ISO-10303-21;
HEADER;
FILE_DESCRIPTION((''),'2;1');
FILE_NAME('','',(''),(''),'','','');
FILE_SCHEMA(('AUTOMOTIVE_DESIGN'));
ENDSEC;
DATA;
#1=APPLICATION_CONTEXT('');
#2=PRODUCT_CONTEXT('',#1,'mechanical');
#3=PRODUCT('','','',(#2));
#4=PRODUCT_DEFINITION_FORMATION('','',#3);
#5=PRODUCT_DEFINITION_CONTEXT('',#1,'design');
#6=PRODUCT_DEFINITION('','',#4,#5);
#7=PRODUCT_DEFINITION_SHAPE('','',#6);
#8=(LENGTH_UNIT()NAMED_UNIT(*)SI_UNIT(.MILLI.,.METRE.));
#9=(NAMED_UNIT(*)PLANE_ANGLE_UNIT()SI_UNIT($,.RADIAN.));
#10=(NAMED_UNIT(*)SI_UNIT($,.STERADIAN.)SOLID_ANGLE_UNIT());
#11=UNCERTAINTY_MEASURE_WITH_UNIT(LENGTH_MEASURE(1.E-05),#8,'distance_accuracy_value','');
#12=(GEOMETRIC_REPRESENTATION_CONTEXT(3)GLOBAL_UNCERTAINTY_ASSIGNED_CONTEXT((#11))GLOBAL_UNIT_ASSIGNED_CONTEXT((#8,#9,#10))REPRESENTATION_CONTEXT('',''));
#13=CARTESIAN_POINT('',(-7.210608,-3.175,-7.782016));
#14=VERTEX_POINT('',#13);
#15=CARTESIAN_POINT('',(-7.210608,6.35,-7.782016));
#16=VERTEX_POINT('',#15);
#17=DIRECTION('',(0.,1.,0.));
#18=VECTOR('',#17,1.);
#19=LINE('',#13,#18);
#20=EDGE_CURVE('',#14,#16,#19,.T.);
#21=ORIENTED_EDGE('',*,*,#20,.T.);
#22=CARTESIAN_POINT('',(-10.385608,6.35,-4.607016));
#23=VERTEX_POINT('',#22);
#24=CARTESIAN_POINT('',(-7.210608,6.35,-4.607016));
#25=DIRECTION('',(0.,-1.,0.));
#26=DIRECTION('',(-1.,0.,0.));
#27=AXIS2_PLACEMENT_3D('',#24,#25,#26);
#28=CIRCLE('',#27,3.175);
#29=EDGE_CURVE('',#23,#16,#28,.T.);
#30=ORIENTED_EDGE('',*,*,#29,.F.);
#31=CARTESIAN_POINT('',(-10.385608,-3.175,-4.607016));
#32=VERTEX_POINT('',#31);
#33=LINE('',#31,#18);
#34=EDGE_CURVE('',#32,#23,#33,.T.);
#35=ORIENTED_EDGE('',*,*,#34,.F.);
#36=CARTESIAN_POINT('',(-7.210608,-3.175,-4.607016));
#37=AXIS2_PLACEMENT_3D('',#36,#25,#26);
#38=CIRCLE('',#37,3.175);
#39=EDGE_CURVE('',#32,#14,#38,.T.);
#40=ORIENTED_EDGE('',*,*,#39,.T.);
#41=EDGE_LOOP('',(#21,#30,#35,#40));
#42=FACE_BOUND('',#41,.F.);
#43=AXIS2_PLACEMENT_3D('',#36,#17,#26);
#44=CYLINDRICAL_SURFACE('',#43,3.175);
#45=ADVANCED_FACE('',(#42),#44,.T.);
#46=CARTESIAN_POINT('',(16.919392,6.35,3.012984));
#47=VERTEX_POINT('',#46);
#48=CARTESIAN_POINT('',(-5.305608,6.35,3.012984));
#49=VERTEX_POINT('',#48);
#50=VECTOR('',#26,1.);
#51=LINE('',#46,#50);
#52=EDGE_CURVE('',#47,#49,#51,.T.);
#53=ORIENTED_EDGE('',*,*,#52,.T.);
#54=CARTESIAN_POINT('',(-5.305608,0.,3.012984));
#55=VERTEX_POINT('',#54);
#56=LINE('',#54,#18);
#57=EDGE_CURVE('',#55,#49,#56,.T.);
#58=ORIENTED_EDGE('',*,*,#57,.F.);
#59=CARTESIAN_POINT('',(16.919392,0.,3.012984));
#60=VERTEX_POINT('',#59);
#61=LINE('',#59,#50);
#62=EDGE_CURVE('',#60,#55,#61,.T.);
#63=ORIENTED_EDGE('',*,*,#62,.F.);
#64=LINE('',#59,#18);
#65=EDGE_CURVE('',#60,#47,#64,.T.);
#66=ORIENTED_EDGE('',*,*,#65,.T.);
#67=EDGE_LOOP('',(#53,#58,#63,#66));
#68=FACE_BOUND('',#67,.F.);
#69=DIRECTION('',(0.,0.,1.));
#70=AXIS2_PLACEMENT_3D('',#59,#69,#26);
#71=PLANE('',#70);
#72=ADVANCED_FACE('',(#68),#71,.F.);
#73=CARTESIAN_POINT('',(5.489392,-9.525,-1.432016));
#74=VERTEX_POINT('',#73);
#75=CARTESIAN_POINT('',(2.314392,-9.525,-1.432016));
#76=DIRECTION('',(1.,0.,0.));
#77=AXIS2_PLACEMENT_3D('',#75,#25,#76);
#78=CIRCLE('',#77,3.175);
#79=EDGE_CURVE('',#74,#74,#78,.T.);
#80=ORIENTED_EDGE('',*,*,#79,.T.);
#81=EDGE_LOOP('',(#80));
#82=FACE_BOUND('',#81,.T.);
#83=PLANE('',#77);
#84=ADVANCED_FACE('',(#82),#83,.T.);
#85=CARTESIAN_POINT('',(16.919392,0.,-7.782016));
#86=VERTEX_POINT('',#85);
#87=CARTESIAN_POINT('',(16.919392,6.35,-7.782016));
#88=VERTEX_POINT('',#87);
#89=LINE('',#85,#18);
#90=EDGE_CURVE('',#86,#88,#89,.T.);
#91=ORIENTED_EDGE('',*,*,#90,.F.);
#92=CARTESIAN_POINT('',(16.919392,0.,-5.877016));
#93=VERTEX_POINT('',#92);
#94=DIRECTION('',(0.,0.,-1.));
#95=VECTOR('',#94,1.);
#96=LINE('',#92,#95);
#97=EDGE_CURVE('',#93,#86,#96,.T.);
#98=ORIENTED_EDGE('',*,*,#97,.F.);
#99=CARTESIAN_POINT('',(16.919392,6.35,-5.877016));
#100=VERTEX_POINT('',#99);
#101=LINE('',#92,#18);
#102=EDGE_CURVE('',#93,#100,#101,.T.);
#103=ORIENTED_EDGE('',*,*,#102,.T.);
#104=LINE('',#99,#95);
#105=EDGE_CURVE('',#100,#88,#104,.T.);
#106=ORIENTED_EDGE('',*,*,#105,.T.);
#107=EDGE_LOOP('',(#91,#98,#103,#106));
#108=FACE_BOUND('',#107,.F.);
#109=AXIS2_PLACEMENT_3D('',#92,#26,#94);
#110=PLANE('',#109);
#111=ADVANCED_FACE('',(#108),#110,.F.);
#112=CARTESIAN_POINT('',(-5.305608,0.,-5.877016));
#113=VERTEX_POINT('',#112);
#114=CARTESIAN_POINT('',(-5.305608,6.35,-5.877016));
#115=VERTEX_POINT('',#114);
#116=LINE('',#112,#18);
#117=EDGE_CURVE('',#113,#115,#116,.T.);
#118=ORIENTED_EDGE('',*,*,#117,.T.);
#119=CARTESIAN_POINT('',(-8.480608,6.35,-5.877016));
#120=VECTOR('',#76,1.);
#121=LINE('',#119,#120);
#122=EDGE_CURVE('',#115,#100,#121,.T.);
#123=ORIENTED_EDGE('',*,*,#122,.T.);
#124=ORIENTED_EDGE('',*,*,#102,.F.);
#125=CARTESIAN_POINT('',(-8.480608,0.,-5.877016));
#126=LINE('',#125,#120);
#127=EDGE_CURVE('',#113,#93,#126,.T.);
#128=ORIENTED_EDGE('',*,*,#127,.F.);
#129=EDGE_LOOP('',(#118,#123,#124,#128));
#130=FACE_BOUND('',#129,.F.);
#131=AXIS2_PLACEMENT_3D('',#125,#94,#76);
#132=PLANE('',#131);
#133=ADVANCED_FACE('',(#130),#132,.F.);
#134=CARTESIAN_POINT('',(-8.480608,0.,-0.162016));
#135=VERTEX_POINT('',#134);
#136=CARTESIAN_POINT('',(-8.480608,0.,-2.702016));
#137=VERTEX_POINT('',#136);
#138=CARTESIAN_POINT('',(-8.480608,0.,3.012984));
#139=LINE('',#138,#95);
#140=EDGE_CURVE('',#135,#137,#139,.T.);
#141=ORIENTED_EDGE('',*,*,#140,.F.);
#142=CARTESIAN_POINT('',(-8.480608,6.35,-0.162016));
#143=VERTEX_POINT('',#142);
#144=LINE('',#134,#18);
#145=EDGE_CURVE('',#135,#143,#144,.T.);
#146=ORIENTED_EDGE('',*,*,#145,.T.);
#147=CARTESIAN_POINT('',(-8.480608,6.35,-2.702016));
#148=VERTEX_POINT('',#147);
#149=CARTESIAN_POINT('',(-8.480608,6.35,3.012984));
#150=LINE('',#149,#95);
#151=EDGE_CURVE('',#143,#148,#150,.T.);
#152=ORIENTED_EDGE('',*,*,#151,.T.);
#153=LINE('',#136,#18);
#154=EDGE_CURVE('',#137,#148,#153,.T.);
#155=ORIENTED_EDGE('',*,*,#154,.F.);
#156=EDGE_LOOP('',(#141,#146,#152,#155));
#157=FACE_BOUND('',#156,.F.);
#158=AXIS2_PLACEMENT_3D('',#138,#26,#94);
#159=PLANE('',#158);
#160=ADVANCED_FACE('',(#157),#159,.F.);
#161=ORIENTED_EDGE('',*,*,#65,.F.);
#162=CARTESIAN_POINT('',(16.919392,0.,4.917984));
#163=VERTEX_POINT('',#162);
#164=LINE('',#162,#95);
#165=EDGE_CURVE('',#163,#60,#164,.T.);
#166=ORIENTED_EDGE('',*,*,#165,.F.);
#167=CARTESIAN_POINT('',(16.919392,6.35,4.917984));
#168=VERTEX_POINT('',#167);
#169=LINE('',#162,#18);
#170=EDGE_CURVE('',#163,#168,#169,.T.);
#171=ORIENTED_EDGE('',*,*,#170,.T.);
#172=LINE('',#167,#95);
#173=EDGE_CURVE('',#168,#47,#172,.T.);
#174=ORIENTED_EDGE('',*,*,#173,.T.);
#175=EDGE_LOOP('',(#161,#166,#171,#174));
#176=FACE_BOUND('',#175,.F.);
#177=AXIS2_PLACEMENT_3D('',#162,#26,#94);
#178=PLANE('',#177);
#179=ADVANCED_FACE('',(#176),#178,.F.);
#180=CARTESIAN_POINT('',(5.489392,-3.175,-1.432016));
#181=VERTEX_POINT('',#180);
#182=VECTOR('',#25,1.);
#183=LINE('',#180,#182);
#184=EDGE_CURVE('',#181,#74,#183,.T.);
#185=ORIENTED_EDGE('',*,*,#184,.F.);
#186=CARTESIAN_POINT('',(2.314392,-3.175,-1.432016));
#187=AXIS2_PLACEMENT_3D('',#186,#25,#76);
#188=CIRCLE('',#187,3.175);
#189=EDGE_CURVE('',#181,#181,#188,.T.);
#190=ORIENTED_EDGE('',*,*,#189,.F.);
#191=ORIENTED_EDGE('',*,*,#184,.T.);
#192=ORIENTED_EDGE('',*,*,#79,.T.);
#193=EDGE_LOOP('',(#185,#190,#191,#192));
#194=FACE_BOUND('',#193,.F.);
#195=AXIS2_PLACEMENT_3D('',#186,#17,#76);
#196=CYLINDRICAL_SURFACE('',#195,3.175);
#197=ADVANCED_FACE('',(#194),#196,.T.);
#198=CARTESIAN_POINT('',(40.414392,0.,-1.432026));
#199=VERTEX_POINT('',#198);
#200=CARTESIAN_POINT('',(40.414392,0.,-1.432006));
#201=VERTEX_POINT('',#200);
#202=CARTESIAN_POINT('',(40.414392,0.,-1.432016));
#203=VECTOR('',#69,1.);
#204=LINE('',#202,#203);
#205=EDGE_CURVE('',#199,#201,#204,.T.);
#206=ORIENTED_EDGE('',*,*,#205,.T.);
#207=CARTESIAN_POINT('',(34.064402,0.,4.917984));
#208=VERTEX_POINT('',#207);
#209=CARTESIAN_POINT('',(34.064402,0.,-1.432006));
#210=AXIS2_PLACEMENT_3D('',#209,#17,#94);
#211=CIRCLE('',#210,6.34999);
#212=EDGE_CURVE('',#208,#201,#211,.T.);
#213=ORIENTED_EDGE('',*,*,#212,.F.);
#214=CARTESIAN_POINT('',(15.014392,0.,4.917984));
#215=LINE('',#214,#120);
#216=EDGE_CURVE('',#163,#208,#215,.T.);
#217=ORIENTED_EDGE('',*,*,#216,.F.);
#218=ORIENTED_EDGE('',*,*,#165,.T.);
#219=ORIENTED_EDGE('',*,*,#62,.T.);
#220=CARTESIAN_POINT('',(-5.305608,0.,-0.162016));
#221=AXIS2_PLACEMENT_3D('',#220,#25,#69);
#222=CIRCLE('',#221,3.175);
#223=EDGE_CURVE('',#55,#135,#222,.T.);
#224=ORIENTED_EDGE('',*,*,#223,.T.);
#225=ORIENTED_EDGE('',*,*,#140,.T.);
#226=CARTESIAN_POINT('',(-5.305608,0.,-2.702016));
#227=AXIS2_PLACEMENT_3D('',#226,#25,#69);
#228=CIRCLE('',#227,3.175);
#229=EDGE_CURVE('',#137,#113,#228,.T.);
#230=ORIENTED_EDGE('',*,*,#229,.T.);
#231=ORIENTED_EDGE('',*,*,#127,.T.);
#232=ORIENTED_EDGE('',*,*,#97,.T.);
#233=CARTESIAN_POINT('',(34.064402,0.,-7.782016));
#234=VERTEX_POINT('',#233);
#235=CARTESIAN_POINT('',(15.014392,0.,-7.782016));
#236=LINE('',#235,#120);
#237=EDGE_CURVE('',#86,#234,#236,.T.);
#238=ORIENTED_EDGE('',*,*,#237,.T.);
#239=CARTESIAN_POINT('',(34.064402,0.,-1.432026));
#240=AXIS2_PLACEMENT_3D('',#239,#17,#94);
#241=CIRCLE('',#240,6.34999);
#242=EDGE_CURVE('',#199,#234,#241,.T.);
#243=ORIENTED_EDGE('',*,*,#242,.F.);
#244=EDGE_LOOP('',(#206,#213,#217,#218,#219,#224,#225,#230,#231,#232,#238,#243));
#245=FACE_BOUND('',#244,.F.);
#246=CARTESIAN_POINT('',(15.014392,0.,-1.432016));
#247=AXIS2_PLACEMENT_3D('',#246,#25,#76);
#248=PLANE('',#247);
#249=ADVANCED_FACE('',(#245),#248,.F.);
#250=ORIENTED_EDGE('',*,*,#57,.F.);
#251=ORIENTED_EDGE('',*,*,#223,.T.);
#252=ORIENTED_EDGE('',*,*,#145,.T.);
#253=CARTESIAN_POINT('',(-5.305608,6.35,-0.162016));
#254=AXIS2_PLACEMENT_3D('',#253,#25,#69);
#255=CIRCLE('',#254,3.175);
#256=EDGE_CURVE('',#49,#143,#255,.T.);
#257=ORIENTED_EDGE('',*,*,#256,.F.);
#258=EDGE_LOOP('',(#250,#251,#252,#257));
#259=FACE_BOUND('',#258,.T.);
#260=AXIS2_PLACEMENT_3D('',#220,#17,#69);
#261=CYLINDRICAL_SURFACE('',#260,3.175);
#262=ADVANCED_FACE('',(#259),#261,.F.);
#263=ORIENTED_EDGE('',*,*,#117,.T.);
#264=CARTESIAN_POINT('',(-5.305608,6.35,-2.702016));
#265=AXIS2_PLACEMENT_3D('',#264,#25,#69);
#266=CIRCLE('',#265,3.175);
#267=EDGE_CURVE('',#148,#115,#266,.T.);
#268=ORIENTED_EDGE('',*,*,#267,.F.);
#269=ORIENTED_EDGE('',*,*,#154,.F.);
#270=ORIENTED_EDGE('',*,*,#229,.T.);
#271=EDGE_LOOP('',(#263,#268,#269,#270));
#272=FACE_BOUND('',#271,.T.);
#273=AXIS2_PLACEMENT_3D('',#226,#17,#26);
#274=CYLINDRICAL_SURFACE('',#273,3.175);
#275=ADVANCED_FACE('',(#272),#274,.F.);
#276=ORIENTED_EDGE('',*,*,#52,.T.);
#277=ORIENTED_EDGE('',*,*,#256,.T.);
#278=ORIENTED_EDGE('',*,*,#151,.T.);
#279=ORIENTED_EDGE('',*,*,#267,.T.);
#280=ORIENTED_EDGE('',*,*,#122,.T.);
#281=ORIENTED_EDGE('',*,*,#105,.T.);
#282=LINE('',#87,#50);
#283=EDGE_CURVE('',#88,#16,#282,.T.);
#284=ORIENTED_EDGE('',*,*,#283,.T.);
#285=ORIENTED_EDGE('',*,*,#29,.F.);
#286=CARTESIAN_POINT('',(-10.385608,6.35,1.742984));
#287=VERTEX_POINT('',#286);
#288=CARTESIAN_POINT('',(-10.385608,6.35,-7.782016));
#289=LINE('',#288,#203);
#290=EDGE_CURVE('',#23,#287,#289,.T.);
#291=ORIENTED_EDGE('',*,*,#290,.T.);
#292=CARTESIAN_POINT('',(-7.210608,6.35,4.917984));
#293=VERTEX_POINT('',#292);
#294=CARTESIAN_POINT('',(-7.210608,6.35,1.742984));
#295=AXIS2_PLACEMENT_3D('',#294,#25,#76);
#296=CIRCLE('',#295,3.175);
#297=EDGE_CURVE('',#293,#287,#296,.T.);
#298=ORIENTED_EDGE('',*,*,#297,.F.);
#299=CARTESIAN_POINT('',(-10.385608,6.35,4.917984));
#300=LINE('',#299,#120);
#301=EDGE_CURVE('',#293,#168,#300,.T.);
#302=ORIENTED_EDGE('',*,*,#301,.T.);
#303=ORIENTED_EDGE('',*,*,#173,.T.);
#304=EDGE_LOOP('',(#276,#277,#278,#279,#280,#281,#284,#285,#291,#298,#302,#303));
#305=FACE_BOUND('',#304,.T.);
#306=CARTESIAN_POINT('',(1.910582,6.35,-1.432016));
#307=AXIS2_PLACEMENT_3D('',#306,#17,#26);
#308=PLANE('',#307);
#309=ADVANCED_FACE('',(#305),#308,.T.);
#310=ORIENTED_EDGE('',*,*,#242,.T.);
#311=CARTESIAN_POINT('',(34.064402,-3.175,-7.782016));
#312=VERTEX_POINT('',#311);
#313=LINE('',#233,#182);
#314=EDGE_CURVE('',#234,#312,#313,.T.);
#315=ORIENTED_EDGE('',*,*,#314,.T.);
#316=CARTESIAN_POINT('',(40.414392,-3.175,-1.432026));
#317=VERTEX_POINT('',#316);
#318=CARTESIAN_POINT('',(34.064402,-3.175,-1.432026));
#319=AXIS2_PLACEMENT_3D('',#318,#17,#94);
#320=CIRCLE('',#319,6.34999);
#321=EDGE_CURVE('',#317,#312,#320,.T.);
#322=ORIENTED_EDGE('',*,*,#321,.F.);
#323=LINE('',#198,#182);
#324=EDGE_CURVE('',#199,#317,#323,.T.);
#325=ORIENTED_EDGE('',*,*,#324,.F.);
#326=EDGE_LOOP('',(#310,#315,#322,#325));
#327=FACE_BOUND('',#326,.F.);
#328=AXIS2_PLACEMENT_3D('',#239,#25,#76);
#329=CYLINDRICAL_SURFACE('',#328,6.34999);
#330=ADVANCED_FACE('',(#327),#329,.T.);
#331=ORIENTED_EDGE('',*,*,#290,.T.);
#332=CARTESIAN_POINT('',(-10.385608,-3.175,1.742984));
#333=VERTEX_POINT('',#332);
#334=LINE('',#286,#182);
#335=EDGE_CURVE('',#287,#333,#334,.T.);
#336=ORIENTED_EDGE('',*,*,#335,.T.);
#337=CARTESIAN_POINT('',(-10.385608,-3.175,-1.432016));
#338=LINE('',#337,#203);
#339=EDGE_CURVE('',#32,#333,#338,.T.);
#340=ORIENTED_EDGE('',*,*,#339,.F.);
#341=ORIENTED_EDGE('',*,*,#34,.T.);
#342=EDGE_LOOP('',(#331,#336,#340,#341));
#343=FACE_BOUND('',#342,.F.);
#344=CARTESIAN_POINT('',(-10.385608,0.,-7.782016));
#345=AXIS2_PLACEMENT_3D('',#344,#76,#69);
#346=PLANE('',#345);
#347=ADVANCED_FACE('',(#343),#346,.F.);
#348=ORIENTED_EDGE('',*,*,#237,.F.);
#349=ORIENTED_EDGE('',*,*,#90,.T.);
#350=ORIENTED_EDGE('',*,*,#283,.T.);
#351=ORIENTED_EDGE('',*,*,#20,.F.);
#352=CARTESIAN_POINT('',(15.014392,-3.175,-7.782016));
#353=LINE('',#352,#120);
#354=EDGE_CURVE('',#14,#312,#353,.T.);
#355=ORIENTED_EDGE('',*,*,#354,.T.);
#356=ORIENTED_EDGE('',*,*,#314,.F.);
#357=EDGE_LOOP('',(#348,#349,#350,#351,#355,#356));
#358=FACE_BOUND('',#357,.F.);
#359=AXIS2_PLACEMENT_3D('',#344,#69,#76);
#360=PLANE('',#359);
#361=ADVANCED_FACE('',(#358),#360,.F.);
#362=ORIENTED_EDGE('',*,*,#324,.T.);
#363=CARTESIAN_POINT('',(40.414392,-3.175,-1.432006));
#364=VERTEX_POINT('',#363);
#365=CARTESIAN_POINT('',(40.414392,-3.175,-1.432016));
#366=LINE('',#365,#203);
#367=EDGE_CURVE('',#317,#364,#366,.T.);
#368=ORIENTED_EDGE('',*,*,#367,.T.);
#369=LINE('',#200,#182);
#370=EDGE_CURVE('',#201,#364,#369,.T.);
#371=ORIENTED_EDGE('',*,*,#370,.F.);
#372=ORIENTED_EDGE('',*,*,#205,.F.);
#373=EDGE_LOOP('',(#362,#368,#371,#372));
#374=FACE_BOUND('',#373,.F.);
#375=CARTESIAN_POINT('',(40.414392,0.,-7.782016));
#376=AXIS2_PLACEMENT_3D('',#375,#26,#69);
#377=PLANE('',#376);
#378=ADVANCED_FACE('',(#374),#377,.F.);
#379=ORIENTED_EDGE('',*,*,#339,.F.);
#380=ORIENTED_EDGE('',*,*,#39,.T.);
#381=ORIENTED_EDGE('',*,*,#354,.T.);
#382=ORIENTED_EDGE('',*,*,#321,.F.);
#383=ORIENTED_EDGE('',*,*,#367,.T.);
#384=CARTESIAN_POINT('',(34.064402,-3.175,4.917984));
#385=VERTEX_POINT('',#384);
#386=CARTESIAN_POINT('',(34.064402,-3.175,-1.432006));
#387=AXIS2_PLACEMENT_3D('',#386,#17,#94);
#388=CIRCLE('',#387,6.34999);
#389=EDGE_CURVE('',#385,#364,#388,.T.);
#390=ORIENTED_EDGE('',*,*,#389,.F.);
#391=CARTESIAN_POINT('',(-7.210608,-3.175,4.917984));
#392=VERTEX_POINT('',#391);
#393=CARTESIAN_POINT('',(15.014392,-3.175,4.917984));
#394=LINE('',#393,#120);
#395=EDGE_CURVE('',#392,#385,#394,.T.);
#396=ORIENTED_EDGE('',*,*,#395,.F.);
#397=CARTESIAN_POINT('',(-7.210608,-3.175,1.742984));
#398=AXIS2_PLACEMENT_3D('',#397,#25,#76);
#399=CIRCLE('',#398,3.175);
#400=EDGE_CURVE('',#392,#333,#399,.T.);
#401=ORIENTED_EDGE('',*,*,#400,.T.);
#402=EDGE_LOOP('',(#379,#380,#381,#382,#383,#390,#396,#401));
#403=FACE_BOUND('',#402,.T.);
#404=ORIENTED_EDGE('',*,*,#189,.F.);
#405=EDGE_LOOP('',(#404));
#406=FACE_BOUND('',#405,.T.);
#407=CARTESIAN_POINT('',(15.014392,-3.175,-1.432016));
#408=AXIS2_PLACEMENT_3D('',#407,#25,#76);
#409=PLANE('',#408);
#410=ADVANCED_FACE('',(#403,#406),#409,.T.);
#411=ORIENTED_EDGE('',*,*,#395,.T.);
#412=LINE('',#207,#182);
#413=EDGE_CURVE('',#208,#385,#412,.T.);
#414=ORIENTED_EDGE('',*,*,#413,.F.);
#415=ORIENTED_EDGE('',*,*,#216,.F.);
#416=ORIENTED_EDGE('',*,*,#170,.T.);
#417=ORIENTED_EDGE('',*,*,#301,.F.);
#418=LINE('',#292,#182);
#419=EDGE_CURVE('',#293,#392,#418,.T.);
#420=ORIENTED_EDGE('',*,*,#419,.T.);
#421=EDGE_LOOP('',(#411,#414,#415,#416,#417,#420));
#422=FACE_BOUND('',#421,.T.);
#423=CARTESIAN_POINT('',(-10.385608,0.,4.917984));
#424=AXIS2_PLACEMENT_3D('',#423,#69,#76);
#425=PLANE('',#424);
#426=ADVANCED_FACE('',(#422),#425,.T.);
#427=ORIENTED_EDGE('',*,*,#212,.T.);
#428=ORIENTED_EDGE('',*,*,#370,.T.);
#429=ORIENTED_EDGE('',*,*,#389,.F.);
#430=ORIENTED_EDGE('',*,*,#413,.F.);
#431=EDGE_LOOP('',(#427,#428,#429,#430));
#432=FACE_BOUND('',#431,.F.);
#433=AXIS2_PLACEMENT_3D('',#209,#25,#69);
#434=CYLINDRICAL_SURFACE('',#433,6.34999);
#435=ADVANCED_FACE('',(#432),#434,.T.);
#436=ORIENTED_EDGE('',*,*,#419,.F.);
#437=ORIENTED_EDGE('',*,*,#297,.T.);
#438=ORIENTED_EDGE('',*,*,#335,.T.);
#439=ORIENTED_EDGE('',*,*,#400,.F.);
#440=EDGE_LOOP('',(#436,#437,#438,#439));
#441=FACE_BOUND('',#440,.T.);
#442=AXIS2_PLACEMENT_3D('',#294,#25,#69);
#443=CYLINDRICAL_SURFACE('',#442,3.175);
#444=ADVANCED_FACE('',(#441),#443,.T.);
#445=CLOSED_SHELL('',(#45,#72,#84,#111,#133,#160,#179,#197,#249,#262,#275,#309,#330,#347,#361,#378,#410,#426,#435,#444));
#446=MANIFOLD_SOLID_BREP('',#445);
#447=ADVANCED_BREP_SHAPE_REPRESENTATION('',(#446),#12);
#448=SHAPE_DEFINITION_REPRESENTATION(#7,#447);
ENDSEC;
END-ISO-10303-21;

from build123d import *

# Parameters (mm, degrees)
F0_W     = 50.8
F0_H     = 12.7
F1_DEPTH = 3.175
F2_R     = 3.175
F3_DEPTH = 6.35
F5_DEPTH = 6.35
F6_R     = 6.34999
F7_R     = 3.175


# Not quite as in the source:
# - a fillet or chamfer is up to 0.001 mm smaller than in the source, because OpenCascade refuses the exact size


with BuildPart() as f1:
    # F0 (on Front) → F1 (new body)
    with BuildSketch(Plane.XZ):
        with Locations((15.0143924374, -1.4320164919)):
            Rectangle(F0_W, F0_H)
    extrude(amount=F1_DEPTH)

    # F2 (on face) → F3 (join)
    with BuildSketch(Plane.XZ.offset(3.175)):
        with Locations((2.3143924374, -1.4320164919)):
            Circle(F2_R)
    extrude(amount=F3_DEPTH)

    # F4 (on face) → F5 (join)
    with BuildSketch(Plane(origin=(0, 0, 0), x_dir=(-1, 0, 0), z_dir=(0, 1, 0))):
        Polygon((8.4806075626, 3.0129835081), (8.4806075626, -5.8770164919), (-16.9193924374, -5.8770164919), (-16.9193924374, -7.7820164919), (10.3856075626, -7.7820164919), (10.3856075626, 4.9179835081), (-16.9193924374, 4.9179835081), (-16.9193924374, 3.0129835081), align=None)
    extrude(amount=F5_DEPTH)

    # F6 (radius 6.35 in the source; OpenCascade refuses exactly that, so slightly less here)
    f6_edges = [f1.edges().sort_by_distance(p)[0] for p in [
        (40.414392, -1.5875, 4.917984),
        (40.414392, -1.5875, -7.782016),
    ]]
    fillet(f6_edges, radius=F6_R)

    # F7
    f7_edges = [f1.edges().sort_by_distance(p)[0] for p in [
        (-8.480608, 3.175, 3.012984),
        (-8.480608, 3.175, -5.877016),
        (-10.385608, 1.5875, 4.917984),
        (-10.385608, 1.5875, -7.782016),
    ]]
    fillet(f7_edges, radius=F7_R)


solid = f1.part
